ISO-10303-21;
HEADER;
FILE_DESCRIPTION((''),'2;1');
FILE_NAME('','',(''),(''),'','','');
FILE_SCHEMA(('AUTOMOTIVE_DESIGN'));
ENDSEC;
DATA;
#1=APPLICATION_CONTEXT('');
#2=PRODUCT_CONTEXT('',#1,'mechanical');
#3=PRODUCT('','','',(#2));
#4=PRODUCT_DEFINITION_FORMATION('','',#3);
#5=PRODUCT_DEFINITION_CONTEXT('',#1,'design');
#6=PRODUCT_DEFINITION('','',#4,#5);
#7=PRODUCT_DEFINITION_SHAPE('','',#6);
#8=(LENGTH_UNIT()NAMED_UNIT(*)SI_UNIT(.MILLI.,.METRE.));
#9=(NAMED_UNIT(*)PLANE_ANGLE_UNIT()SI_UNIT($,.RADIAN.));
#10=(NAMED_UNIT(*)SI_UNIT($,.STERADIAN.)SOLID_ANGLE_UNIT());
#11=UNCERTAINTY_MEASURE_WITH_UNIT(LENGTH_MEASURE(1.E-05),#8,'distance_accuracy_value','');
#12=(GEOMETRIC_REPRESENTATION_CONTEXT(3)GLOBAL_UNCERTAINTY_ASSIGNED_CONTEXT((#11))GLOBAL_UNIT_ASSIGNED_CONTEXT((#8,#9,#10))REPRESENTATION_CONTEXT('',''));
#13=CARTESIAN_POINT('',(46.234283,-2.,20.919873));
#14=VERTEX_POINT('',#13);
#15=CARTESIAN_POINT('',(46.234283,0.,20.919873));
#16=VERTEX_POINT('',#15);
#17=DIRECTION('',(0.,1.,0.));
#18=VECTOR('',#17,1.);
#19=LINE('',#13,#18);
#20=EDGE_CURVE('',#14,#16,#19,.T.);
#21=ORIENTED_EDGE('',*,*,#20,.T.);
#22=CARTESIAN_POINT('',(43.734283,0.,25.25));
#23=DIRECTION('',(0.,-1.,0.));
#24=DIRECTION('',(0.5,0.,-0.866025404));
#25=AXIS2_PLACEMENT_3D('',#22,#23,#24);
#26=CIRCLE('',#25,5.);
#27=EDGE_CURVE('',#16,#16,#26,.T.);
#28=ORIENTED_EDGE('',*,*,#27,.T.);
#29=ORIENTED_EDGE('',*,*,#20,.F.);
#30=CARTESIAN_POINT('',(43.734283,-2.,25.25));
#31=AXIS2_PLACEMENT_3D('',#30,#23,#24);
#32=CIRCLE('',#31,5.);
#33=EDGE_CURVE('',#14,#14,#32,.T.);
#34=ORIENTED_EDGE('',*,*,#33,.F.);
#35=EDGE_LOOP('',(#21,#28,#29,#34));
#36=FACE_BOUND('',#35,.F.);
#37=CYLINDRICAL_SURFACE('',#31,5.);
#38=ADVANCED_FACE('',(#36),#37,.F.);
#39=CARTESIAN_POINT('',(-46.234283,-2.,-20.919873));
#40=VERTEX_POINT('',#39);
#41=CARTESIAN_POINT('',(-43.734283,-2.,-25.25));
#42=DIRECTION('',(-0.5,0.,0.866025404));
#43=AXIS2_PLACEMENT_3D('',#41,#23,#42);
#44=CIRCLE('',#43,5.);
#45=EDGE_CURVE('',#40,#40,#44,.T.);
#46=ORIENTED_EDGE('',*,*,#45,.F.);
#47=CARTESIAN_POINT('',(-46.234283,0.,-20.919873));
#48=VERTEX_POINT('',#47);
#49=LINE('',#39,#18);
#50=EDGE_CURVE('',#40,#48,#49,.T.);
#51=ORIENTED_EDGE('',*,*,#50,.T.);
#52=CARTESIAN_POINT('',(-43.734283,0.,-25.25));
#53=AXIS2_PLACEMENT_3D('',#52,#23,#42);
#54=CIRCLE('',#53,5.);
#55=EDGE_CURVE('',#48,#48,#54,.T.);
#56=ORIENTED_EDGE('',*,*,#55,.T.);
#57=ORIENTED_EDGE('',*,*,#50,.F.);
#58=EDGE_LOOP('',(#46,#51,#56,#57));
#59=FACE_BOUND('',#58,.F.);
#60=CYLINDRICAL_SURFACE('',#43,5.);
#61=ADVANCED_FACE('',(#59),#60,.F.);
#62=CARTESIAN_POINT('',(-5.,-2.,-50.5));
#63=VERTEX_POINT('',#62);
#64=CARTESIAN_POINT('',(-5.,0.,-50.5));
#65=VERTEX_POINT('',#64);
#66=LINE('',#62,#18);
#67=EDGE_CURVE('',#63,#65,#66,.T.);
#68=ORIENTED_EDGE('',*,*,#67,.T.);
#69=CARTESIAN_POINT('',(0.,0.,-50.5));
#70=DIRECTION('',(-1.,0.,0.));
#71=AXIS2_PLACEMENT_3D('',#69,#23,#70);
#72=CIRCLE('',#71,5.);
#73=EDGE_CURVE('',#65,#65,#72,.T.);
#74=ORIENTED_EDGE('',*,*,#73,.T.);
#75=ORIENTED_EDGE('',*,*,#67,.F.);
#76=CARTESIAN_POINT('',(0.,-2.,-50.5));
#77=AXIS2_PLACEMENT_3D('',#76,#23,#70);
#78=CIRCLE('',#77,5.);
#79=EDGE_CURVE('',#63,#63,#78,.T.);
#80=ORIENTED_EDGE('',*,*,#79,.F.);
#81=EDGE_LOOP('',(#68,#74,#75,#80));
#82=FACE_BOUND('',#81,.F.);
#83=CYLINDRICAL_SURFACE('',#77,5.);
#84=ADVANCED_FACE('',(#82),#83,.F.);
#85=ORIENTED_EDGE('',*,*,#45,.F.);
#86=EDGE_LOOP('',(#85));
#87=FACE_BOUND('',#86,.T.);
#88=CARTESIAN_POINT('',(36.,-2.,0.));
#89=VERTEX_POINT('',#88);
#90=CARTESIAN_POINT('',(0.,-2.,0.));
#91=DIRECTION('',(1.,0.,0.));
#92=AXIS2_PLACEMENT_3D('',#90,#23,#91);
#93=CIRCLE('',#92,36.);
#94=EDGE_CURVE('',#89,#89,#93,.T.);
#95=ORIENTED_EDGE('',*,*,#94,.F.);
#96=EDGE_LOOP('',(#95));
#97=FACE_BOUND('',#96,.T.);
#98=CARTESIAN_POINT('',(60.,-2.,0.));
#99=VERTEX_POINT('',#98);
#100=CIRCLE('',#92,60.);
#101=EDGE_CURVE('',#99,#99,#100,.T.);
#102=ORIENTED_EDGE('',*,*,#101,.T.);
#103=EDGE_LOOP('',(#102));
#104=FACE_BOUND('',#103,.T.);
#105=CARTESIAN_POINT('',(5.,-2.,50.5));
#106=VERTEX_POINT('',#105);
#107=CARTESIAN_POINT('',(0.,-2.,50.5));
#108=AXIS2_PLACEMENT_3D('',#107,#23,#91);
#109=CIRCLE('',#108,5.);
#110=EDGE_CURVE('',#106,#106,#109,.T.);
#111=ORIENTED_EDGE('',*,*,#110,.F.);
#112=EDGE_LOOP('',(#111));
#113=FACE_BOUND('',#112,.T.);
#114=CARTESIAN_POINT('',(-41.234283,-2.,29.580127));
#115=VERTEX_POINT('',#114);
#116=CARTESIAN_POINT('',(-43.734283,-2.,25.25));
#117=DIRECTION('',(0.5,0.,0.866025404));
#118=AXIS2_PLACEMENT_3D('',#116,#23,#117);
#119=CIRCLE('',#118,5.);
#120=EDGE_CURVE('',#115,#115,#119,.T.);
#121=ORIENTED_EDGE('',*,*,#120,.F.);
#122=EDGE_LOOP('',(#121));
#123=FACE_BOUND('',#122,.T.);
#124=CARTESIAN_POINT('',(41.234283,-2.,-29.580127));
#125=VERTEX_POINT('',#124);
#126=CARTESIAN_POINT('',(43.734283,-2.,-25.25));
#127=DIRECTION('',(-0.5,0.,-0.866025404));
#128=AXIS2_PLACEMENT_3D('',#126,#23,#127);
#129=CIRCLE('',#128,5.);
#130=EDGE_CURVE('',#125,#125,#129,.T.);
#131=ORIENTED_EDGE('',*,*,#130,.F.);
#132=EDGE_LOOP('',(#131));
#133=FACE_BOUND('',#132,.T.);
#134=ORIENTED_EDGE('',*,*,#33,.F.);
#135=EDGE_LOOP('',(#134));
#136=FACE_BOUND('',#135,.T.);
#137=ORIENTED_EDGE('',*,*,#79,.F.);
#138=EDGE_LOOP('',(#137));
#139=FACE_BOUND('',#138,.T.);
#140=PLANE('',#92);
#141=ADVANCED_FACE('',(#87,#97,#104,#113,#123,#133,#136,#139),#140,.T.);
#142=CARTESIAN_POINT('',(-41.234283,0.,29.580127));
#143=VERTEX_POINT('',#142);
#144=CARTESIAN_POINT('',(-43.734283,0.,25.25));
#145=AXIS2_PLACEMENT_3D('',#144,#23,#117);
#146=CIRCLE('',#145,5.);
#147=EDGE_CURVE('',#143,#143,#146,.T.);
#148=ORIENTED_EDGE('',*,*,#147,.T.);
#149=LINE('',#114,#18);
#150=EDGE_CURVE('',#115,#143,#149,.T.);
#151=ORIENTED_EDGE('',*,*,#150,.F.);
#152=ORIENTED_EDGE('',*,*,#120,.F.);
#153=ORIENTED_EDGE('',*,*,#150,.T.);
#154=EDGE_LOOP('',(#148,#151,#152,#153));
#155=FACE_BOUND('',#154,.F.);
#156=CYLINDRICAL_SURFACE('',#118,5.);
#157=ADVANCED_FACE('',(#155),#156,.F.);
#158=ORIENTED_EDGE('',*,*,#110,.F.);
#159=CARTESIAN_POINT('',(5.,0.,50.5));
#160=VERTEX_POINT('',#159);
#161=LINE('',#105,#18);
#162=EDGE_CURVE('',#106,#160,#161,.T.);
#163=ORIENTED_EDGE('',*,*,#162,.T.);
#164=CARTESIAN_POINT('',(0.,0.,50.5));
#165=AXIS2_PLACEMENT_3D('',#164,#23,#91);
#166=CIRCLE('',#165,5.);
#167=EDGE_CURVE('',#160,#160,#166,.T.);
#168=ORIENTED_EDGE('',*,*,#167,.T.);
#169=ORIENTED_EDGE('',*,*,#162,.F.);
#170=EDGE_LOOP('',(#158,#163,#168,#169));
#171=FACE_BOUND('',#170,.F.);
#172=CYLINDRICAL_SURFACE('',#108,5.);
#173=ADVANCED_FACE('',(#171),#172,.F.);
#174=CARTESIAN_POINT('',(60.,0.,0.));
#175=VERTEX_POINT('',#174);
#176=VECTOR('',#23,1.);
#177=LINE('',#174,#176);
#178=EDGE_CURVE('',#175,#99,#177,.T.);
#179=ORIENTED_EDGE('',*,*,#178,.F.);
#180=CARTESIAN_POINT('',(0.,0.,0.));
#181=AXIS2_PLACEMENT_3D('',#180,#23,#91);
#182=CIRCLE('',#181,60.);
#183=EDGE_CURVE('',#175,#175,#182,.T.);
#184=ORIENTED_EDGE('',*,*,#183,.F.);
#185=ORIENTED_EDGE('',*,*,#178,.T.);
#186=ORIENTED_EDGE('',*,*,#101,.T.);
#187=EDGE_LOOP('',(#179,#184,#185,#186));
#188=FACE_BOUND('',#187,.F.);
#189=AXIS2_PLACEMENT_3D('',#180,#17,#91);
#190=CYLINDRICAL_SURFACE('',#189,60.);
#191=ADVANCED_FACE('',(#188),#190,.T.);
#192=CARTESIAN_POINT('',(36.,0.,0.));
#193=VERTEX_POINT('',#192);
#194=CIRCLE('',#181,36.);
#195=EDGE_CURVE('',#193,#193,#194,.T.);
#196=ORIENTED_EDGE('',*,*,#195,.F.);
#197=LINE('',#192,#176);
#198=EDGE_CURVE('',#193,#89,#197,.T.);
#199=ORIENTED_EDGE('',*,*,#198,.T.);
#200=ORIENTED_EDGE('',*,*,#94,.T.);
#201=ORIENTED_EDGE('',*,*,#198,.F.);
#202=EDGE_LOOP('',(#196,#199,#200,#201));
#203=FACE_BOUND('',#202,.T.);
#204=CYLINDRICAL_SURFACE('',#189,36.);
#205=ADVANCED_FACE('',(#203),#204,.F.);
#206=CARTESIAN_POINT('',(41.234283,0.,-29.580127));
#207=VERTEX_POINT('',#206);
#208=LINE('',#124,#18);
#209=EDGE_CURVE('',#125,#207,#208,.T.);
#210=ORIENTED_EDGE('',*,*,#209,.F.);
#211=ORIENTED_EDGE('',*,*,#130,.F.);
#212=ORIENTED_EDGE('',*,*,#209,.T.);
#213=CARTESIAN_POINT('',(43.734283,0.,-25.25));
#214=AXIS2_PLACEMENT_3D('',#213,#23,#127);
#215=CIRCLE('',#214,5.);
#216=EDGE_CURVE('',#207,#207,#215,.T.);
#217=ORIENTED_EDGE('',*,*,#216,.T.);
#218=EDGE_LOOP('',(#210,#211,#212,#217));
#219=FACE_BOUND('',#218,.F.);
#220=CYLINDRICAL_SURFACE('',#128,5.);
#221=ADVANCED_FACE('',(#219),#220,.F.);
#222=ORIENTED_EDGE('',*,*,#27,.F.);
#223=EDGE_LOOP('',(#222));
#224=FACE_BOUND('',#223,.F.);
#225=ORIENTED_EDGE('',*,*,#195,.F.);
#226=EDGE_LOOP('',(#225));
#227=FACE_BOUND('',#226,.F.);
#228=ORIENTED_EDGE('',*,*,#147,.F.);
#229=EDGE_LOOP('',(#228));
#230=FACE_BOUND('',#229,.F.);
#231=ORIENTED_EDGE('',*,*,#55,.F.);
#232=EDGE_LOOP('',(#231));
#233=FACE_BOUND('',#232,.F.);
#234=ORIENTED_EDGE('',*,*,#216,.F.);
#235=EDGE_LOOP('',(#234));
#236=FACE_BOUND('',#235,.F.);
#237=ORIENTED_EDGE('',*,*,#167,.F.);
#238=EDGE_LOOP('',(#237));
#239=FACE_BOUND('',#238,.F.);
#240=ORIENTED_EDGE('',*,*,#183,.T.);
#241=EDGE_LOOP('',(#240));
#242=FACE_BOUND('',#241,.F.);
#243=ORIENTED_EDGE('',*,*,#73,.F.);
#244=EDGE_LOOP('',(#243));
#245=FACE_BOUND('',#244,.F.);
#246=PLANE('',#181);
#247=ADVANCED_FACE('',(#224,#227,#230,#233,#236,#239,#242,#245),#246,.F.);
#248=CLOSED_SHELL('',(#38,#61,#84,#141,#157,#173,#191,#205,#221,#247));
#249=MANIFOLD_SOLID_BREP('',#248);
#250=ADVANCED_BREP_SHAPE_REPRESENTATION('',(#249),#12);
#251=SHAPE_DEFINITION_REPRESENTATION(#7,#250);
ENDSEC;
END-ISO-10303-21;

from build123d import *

# Parameters (mm, degrees)
F0_R            = 60
F0_R_2          = 36
F1_DEPTH        = 2
F2_R            = 5
F3_DEPTH        = 2.001
F3_COPIES_COUNT = 6


# Not quite as in the source:
# - a pattern or mirror of a feature is missing from the dataset's text; its kind, count and spacing are read off the source's solid


with BuildPart() as f1:
    # F0 (on Front) → F1 (new body)
    with BuildSketch(Plane.XZ):
        Circle(F0_R)
        Circle(F0_R_2, mode=Mode.SUBTRACT)
    extrude(amount=F1_DEPTH)

    # F2 (on face) → F3 (cut, through all)
    with BuildSketch(Plane.XZ.offset(2)):
        with Locations((0, 50.5)):
            Circle(F2_R)
    f3 = extrude(amount=-F3_DEPTH, mode=Mode.SUBTRACT)

    # F3_copies: F3 ×6 about axis
    f3_copies_axis = Axis((0, 0, 0), (0, 1, 0))
    for i in range(1, F3_COPIES_COUNT):
        add(f3.rotate(f3_copies_axis, i * 360 / F3_COPIES_COUNT), mode=Mode.SUBTRACT)


solid = f1.part
